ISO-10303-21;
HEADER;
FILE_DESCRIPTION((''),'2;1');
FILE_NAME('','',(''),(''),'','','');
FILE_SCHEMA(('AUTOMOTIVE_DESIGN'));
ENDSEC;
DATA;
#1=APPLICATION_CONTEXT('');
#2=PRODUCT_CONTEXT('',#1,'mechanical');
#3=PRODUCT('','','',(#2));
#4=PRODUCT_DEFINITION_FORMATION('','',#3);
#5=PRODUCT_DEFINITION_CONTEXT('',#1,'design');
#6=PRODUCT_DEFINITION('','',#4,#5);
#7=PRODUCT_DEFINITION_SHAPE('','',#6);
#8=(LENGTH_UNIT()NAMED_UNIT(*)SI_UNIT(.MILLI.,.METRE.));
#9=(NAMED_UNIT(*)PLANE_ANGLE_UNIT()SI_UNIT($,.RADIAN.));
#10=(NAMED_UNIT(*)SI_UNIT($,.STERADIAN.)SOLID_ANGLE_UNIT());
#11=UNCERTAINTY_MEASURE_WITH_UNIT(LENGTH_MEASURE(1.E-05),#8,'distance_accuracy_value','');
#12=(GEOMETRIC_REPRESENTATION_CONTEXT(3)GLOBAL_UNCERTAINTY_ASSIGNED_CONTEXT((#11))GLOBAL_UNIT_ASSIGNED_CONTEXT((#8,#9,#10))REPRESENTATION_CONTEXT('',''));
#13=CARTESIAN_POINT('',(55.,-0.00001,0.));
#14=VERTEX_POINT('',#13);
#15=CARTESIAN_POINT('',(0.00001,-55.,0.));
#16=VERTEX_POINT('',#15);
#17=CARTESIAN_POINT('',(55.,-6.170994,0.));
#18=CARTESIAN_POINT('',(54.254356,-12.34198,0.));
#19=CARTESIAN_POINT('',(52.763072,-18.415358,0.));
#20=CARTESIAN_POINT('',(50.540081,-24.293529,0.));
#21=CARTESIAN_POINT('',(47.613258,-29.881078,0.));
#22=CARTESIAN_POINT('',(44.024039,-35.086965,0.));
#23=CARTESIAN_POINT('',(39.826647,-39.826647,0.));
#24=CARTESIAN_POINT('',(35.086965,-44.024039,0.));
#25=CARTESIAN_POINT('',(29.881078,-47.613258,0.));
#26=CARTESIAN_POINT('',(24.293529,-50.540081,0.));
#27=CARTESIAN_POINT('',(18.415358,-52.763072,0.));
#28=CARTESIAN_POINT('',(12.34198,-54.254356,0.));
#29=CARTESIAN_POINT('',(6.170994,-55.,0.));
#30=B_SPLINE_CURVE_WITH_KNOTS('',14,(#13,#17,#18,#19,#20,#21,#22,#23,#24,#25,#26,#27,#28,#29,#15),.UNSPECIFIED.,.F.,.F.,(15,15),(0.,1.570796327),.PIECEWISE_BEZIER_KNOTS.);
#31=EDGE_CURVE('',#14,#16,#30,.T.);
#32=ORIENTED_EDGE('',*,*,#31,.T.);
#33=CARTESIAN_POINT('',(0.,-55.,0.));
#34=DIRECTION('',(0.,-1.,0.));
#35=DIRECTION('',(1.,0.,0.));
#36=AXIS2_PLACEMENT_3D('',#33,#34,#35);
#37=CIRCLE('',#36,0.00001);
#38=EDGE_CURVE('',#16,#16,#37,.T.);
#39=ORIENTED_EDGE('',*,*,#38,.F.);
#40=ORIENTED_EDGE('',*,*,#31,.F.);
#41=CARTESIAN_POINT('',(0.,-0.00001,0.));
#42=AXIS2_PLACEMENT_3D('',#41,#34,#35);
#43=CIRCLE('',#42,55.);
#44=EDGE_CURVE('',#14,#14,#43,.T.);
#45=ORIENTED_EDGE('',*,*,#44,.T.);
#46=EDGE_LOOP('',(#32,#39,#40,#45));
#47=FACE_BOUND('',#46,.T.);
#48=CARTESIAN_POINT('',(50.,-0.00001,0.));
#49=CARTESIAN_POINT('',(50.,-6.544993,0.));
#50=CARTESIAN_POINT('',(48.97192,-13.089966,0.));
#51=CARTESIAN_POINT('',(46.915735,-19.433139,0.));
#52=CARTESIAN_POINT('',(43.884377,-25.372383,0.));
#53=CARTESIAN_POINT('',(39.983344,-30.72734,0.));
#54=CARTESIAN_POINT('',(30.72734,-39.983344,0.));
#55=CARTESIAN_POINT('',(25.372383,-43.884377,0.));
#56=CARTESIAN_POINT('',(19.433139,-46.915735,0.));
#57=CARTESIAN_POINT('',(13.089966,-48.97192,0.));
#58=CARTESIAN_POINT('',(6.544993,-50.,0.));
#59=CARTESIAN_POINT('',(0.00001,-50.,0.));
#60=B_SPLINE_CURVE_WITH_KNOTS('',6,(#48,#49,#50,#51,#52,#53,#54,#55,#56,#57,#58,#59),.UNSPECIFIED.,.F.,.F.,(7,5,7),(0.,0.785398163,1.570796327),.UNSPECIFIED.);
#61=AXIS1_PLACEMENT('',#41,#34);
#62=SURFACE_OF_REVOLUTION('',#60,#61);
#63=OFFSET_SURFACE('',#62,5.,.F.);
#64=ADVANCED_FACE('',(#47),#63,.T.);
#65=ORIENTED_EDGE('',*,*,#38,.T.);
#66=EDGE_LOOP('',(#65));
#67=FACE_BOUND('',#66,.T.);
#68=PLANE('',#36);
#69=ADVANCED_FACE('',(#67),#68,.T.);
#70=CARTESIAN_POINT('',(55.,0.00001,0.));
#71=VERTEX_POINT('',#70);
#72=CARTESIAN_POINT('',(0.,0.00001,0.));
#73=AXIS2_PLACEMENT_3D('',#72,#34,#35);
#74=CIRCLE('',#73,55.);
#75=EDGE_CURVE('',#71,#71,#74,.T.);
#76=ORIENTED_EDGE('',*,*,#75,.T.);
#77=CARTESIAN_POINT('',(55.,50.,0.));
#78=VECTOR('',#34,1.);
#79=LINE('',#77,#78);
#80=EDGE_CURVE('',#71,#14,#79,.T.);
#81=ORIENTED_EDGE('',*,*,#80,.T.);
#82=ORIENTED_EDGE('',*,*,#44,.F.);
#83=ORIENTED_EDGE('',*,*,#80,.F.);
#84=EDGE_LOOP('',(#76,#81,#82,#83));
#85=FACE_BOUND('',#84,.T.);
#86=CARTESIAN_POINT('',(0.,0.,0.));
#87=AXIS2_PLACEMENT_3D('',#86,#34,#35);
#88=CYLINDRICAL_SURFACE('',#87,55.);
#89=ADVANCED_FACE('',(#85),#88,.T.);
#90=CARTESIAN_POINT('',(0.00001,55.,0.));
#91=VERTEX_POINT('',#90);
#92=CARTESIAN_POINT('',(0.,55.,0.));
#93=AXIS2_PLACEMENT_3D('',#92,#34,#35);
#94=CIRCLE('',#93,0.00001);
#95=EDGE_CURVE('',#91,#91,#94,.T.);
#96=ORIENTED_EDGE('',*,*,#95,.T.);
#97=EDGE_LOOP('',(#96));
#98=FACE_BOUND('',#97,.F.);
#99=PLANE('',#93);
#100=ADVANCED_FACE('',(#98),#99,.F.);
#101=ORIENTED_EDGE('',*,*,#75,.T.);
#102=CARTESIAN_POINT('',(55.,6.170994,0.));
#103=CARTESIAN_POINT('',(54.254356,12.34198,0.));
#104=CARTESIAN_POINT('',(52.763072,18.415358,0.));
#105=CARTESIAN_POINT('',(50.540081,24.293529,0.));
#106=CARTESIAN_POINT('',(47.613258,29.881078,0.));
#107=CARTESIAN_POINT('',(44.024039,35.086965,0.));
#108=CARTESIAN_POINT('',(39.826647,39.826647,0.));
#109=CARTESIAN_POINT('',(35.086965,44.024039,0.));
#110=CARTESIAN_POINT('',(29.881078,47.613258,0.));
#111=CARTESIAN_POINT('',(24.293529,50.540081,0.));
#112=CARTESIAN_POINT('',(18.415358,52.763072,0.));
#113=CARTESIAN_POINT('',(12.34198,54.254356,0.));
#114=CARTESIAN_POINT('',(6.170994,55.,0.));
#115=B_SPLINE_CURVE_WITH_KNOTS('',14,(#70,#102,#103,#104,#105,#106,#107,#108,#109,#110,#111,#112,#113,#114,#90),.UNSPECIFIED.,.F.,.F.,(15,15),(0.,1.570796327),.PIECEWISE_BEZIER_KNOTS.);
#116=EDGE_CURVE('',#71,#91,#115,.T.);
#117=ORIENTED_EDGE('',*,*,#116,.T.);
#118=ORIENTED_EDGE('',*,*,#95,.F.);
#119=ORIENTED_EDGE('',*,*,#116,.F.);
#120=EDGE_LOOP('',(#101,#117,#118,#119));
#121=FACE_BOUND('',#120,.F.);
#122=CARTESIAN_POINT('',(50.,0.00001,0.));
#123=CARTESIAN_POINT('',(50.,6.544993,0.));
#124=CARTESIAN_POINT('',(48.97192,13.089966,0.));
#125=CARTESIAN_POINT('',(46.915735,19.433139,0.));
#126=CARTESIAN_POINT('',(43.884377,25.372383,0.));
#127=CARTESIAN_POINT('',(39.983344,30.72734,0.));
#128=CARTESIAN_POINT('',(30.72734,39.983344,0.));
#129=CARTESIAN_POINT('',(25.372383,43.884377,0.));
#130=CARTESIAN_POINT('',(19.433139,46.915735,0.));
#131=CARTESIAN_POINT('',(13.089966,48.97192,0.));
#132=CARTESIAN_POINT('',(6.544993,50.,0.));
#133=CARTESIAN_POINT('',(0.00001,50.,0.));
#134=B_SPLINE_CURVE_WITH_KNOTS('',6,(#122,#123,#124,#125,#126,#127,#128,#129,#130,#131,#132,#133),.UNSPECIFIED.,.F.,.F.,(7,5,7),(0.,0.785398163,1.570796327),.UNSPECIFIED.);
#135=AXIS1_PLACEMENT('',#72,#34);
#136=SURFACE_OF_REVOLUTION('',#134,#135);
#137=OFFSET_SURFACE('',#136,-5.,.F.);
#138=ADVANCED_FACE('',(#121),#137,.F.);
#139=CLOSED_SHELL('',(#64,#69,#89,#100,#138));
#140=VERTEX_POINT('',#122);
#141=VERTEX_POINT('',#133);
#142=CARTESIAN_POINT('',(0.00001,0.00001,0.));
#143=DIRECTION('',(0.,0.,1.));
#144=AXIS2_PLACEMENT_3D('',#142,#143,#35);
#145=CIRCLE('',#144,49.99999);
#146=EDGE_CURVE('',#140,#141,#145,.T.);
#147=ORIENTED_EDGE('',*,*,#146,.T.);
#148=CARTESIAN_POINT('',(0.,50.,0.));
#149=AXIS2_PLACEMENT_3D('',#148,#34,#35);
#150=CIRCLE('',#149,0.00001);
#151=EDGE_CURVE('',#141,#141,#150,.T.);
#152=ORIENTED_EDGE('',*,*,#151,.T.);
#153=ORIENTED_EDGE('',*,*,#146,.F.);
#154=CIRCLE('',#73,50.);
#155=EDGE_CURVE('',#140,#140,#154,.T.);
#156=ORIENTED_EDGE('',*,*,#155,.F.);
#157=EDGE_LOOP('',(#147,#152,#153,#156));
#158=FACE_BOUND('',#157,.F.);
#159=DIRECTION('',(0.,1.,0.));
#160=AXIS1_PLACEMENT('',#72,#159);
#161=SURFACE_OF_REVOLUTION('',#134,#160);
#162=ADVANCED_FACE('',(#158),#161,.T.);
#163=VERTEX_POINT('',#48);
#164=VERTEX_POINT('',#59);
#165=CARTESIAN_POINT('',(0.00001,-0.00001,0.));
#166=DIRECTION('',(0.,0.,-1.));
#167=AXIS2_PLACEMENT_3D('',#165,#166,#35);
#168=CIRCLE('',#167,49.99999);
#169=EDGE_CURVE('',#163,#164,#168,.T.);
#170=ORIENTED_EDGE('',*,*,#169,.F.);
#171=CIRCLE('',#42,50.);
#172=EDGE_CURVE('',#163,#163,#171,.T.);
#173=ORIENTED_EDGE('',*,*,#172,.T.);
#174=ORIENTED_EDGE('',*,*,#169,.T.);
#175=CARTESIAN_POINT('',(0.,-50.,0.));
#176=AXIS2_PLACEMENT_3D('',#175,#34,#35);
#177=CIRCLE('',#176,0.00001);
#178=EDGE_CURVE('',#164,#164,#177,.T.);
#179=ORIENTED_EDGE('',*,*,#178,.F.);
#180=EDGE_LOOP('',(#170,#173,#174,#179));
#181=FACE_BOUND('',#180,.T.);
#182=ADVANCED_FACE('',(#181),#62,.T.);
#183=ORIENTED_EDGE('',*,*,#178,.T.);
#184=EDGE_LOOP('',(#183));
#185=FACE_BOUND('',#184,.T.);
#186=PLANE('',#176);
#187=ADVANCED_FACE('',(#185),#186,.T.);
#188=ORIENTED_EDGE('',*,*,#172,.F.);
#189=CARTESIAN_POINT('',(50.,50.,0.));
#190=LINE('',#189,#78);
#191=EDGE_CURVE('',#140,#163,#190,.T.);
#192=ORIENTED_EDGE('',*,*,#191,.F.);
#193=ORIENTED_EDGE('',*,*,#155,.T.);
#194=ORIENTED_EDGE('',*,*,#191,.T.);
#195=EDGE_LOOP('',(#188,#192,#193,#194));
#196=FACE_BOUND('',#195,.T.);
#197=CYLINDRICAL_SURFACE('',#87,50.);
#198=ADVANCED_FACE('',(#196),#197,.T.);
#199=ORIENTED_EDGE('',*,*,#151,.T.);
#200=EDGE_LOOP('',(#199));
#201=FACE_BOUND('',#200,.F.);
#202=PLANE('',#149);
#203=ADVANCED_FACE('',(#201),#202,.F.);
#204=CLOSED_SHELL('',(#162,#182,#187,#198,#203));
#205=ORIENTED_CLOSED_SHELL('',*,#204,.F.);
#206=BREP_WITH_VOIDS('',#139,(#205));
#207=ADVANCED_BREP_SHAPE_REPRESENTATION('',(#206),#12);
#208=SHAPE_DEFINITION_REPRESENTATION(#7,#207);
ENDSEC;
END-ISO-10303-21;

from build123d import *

# Parameters (mm, degrees)
F0_R          = 50
F1_DEPTH      = 50
F1_DEPTH_BACK = 50
F2_R          = 49.99999
F3_T          = 5


# Not quite as in the source:
# - a fillet or chamfer is up to 0.001 mm smaller than in the source, because OpenCascade refuses the exact size


with BuildPart() as f1:
    # F0 (on Front) → F1 (new body, two sides)
    with BuildSketch(Plane.XZ) as f1_sk:
        Circle(F0_R)
    extrude(amount=F1_DEPTH)
    extrude(f1_sk.sketch, amount=-F1_DEPTH_BACK)

    # F2 (radius 50 in the source; OpenCascade refuses exactly that, so slightly less here)
    f2_edges = [f1.edges().sort_by_distance(p)[0] for p in [
        (-50, 50, 0),
        (-50, -50, 0),
    ]]
    fillet(f2_edges, radius=F2_R)

    # F3 (hollow, outwards: the wall grows on the outside; the body as it was is the cavity)
    f3_inside = f1.part
    offset(amount=F3_T)
    add(f3_inside, mode=Mode.SUBTRACT)


solid = f1.part
